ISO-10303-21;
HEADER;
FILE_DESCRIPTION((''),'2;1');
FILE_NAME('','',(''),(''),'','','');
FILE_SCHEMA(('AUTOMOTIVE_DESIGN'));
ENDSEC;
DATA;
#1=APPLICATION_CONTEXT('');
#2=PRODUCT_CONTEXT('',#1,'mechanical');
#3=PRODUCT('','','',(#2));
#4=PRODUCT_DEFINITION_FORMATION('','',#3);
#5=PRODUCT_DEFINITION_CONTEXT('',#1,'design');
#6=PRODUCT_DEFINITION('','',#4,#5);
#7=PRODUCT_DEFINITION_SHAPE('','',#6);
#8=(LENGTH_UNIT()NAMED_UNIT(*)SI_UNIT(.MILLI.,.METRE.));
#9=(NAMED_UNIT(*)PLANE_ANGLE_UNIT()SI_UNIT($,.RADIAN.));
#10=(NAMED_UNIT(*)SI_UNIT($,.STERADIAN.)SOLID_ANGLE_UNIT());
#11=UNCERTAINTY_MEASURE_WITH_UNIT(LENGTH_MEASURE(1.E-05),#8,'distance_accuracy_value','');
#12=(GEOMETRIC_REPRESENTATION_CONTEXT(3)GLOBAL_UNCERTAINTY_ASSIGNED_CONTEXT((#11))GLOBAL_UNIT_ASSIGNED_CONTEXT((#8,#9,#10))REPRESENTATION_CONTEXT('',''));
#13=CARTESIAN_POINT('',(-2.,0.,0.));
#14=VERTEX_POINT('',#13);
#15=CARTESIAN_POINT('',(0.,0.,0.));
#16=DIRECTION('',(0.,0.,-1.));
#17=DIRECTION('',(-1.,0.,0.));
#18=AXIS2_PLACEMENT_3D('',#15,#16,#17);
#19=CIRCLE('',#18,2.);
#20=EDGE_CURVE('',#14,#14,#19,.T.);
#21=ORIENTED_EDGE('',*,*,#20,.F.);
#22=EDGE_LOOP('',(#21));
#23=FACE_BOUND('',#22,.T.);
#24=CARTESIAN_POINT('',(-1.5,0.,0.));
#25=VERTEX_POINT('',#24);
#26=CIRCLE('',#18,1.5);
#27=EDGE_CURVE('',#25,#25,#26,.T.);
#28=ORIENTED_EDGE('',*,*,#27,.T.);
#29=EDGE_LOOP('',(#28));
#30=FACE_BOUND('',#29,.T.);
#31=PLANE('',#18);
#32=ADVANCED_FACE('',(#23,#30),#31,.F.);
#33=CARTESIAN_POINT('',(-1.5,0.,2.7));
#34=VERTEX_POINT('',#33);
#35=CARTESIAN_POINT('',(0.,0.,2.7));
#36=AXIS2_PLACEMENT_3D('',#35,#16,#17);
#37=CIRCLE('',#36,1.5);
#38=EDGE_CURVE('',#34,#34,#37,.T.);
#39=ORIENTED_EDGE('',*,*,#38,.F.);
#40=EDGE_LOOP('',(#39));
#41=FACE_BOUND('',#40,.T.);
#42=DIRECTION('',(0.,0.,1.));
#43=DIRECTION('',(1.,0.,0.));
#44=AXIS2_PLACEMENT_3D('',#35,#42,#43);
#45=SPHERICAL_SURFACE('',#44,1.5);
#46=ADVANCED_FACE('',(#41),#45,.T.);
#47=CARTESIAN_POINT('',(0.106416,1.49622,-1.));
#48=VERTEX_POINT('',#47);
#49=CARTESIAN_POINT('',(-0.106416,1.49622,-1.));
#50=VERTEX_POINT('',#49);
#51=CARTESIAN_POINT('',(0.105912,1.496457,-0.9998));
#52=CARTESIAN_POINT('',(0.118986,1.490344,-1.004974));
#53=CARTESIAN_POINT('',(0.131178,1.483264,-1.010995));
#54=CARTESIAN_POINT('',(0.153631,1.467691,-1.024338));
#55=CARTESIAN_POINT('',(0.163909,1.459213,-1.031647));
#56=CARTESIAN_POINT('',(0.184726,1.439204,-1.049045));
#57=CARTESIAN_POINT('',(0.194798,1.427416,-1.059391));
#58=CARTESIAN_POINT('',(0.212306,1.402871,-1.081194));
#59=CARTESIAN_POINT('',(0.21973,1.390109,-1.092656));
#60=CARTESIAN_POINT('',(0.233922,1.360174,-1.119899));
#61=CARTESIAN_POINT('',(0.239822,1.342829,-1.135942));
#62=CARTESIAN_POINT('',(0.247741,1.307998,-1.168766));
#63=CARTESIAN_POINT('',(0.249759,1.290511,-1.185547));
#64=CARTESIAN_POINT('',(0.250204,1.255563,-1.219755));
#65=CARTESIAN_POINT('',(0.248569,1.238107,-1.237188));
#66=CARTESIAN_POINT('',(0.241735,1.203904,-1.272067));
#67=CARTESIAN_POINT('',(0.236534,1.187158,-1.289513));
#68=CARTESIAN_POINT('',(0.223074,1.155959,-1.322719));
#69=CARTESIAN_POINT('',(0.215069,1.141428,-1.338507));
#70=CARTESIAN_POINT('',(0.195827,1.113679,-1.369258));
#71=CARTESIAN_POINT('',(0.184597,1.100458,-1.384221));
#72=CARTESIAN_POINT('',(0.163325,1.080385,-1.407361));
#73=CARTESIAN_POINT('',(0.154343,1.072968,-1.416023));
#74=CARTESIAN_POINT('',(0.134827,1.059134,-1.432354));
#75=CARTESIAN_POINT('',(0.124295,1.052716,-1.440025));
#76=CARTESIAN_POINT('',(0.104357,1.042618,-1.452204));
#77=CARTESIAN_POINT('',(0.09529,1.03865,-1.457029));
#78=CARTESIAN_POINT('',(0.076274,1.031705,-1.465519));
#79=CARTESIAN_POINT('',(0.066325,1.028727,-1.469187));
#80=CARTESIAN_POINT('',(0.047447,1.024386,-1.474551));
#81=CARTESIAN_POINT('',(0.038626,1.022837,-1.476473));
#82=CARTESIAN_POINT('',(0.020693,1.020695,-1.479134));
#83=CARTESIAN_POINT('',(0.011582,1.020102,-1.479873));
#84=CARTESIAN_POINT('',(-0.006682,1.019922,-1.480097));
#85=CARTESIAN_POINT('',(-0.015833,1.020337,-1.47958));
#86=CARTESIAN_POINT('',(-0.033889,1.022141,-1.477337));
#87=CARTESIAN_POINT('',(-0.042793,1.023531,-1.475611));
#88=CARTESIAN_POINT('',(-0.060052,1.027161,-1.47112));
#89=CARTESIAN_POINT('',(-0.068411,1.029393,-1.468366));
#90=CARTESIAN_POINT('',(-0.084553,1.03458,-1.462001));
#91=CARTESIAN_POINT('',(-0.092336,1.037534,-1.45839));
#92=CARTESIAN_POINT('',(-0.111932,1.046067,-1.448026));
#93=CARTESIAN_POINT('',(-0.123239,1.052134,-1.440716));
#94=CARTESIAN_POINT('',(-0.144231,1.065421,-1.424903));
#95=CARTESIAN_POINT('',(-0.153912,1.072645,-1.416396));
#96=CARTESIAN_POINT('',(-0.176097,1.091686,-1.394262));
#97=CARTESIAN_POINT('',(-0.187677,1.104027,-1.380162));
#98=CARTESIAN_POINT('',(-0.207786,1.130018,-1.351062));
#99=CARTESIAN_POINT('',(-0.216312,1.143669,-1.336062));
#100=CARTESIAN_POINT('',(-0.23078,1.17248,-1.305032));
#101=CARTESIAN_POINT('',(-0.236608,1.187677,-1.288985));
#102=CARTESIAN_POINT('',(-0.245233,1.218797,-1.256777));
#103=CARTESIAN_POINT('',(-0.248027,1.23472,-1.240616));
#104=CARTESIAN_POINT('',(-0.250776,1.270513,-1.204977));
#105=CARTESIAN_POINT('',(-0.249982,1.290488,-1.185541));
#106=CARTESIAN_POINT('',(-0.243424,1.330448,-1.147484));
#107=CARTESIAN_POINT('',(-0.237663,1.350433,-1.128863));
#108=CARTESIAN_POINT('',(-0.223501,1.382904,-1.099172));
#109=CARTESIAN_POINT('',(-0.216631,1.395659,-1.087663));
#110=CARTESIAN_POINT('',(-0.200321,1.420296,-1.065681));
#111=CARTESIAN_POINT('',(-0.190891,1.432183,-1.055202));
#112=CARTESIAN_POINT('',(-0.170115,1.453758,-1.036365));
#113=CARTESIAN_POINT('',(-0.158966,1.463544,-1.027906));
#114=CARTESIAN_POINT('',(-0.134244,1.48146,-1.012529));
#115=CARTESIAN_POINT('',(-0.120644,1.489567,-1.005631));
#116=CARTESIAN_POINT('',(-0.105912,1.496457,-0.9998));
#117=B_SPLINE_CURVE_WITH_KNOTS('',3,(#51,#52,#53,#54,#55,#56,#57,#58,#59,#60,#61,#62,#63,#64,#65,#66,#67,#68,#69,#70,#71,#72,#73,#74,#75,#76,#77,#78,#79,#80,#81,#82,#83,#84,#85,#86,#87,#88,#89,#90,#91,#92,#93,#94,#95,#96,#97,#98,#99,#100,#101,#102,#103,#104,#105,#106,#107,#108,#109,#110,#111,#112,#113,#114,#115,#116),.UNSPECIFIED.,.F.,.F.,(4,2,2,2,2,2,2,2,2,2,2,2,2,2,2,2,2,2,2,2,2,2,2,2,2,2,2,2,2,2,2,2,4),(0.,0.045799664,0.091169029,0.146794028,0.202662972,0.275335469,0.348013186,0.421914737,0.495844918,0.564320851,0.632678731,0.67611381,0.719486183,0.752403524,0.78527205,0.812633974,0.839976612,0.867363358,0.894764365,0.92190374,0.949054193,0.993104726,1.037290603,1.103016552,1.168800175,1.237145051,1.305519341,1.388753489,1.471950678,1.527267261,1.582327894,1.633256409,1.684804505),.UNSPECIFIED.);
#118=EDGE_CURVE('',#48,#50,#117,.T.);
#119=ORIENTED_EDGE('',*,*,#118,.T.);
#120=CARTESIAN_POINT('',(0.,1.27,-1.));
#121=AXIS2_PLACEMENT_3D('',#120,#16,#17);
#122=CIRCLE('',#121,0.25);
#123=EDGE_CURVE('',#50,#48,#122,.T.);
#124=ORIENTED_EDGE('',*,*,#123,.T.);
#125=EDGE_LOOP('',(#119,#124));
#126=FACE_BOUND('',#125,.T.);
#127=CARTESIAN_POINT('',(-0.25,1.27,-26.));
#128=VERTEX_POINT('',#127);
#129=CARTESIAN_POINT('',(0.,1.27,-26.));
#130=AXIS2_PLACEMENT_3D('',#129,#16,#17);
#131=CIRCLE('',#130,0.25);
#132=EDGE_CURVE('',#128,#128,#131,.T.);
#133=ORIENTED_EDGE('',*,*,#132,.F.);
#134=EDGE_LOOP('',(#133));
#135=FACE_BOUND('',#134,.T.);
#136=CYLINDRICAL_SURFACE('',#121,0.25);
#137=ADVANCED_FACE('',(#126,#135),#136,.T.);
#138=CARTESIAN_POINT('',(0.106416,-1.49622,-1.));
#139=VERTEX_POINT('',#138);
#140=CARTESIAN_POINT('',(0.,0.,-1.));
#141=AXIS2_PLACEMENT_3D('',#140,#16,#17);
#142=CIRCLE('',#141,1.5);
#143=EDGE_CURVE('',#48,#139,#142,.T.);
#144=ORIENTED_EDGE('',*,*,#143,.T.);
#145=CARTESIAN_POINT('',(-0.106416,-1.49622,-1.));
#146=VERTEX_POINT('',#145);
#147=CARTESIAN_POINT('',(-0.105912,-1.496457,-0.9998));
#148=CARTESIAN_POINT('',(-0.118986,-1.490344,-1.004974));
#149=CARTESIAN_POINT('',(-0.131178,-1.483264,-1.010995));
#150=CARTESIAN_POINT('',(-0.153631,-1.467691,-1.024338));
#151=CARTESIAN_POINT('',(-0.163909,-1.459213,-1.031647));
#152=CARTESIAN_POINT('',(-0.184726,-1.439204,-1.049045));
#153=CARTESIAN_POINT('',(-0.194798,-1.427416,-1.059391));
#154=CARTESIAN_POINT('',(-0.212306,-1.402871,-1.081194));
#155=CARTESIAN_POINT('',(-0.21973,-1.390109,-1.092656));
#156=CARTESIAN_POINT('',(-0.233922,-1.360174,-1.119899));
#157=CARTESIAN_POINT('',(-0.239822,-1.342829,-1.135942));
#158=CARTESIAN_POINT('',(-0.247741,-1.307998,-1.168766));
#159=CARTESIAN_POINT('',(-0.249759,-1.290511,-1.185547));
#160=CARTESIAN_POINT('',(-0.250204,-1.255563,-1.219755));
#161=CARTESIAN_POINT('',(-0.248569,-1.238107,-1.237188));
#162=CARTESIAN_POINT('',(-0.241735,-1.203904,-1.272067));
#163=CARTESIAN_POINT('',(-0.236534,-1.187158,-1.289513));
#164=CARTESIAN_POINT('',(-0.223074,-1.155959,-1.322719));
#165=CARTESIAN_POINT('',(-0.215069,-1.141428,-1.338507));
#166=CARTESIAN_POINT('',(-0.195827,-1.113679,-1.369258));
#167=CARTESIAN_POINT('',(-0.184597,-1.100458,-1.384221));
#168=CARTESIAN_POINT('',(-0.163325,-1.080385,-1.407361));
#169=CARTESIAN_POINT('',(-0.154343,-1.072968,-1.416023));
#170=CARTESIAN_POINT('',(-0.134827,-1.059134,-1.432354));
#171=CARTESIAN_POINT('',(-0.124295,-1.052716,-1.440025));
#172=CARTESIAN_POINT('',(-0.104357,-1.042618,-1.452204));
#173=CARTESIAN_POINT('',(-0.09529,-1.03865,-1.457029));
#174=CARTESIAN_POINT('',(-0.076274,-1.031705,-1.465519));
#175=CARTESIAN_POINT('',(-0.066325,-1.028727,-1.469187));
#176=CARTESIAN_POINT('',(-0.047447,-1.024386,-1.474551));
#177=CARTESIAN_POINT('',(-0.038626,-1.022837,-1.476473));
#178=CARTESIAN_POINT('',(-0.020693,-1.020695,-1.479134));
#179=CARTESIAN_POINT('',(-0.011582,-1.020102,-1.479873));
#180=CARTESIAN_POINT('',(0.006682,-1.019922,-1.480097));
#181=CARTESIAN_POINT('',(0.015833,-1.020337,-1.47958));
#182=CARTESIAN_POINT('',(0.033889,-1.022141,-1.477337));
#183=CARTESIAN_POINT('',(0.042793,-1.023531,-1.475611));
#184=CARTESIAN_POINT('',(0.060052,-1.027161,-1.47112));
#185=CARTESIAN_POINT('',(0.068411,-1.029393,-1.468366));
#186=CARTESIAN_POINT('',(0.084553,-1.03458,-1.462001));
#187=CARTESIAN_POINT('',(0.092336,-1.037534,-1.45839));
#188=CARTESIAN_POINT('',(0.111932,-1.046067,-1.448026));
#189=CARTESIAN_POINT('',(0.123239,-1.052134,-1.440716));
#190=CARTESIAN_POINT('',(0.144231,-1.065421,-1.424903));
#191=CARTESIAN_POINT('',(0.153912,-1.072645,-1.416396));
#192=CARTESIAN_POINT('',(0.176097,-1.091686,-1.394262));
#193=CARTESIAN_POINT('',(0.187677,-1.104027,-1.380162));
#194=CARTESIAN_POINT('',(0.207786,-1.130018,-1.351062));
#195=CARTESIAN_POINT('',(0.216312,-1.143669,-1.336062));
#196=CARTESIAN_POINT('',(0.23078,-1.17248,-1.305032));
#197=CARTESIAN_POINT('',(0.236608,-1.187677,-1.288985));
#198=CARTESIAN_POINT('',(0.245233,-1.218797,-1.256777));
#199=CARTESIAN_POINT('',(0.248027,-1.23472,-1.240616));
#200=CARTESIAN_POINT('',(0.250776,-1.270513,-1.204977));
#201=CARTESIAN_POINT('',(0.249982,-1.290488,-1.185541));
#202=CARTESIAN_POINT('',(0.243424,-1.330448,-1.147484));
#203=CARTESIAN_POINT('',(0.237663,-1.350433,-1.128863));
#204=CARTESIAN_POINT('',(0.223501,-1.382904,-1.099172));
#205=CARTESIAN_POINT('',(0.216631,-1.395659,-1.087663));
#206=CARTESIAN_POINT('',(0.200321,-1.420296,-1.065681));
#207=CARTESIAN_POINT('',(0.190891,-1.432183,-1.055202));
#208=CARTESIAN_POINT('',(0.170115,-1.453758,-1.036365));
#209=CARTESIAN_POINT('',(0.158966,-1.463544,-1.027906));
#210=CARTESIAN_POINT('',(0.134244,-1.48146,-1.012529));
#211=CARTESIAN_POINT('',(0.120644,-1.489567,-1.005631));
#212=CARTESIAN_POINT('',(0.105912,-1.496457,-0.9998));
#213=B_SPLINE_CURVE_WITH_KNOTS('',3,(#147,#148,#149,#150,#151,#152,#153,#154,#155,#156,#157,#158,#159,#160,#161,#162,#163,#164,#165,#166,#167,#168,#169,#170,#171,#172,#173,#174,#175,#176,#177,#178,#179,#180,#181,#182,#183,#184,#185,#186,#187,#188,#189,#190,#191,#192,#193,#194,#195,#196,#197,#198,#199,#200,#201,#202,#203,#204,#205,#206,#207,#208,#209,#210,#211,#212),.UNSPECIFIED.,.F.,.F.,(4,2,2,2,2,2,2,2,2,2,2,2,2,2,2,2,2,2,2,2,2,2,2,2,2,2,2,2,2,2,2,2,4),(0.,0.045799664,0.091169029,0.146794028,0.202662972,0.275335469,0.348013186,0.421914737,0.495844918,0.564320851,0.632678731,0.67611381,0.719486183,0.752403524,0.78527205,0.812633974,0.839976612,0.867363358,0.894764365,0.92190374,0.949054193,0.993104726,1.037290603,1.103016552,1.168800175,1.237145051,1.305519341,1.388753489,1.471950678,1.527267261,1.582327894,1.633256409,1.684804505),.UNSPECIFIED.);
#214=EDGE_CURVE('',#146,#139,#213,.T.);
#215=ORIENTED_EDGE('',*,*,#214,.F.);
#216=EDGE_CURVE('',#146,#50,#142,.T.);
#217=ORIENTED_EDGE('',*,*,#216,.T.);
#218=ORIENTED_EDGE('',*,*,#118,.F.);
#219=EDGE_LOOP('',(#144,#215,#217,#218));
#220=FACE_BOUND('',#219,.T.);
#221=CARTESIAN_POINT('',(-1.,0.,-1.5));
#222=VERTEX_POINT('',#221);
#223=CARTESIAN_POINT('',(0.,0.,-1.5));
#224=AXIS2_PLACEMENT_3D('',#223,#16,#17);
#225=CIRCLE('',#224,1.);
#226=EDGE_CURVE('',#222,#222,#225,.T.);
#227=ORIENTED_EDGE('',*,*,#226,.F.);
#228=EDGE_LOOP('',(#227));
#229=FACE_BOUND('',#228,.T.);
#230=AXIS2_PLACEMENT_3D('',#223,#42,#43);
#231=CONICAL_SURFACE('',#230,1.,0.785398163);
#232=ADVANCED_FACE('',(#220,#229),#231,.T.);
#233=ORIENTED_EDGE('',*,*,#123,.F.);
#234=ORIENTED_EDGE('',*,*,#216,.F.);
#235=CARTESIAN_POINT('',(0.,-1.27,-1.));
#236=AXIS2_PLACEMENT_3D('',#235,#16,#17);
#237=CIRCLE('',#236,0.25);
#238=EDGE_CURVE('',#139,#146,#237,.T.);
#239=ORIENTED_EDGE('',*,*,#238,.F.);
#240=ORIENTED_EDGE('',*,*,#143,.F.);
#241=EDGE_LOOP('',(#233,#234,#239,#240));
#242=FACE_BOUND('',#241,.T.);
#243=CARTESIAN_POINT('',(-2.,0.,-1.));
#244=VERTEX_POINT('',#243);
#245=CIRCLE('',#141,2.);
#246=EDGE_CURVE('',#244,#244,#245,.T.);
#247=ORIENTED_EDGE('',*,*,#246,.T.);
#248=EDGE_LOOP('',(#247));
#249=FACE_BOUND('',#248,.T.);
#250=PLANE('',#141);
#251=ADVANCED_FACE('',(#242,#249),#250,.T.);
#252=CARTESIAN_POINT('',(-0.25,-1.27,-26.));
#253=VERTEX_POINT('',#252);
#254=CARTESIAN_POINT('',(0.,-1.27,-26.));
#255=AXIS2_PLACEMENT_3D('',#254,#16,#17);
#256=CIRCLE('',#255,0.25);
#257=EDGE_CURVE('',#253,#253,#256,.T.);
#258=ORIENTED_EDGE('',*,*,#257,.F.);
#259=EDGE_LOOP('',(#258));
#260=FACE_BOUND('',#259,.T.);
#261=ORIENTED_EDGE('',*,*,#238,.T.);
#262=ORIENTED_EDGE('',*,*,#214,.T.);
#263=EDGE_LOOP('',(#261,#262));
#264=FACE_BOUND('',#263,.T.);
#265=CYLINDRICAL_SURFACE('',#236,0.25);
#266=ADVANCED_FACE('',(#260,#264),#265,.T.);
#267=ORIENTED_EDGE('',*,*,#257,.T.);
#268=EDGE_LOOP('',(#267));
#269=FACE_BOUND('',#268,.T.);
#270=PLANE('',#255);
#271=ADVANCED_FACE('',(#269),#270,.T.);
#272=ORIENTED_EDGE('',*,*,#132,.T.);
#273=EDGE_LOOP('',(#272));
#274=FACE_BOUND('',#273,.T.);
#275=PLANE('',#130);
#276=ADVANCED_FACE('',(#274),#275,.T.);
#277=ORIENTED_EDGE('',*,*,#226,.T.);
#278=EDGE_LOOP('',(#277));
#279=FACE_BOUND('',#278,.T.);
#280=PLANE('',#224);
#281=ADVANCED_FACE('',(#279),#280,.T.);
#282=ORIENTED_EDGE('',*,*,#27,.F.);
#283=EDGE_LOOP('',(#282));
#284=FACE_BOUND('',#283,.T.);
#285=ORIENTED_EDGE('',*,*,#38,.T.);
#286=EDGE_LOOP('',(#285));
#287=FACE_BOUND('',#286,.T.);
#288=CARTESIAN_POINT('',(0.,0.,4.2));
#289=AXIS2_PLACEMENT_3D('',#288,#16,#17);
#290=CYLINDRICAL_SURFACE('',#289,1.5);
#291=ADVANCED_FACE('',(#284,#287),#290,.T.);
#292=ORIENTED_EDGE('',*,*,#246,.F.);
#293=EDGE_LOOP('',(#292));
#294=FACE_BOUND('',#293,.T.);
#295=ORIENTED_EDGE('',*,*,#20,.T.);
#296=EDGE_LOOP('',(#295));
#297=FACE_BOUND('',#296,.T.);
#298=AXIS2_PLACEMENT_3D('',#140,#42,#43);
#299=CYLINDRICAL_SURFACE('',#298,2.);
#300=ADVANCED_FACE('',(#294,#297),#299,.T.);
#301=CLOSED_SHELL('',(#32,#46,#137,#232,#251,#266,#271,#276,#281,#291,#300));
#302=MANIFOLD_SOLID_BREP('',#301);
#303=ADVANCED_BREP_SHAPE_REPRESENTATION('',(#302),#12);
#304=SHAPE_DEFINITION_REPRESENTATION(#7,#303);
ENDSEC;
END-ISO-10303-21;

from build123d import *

# Parameters (mm, degrees)
SKETCH_1_R           = 1.5
EXTRUDE_1_DEPTH      = 4.2
FILLET_1_R           = 1.5
SKETCH_2_R           = 2
EXTRUDE_2_DEPTH      = 1
EXTRUDE_START        = 0.5
SKETCH_3_R           = 1.5
EXTRUDE_3_DEPTH      = 0.5
CHAMFER_1_SIZE       = 0.5
EXTRUDE_4_DEPTH      = 24.5
EXTRUDE_4_DEPTH_BACK = 0.5
SKETCH_4_R           = 0.25


with BuildPart() as part:
    # Эскиз1 → Бобышка-Вытянуть1 (new body)
    with BuildSketch(Plane.XY):
        Circle(SKETCH_1_R)
    extrude(amount=EXTRUDE_1_DEPTH)

    # Скругление1
    fillet_1_edges = [part.edges().sort_by_distance(p)[0] for p in [
        (-1.5, 0, 4.2),
    ]]
    fillet(fillet_1_edges, radius=FILLET_1_R)

    # Эскиз2 → Бобышка-Вытянуть2 (add)
    with BuildSketch(Plane(origin=(0, 0, 0), x_dir=(-1, 0, 0), z_dir=(0, 0, -1))):
        Circle(SKETCH_2_R)
    extrude(amount=EXTRUDE_2_DEPTH)

    # Эскиз3 → Бобышка-Вытянуть3 (add)
    with BuildSketch(Plane(origin=(0, 0, -1), x_dir=(-1, 0, 0), z_dir=(0, 0, -1)).offset(EXTRUDE_START)):
        Circle(SKETCH_3_R)
    extrude(amount=-EXTRUDE_3_DEPTH)

    # Фаска1
    chamfer_1_edges = [part.edges().sort_by_distance(p)[0] for p in [
        (1.5, 0, -1.5),
    ]]
    chamfer(chamfer_1_edges, length=CHAMFER_1_SIZE - 0.0001)  # a hair under: the kernel refuses the full size

    # Эскиз4 → Бобышка-Вытянуть4 (add, two sides: drawn at the far end of the back side and taken through both)
    with BuildSketch(Plane(origin=(0, 0, -1.5), x_dir=(-1, 0, 0), z_dir=(0, 0, -1)).offset(-EXTRUDE_4_DEPTH_BACK)):
        with Locations((0, 1.27)):
            Circle(SKETCH_4_R)
        with Locations((0, -1.27)):
            Circle(SKETCH_4_R)
    extrude(amount=EXTRUDE_4_DEPTH + EXTRUDE_4_DEPTH_BACK)


solid = part.part
